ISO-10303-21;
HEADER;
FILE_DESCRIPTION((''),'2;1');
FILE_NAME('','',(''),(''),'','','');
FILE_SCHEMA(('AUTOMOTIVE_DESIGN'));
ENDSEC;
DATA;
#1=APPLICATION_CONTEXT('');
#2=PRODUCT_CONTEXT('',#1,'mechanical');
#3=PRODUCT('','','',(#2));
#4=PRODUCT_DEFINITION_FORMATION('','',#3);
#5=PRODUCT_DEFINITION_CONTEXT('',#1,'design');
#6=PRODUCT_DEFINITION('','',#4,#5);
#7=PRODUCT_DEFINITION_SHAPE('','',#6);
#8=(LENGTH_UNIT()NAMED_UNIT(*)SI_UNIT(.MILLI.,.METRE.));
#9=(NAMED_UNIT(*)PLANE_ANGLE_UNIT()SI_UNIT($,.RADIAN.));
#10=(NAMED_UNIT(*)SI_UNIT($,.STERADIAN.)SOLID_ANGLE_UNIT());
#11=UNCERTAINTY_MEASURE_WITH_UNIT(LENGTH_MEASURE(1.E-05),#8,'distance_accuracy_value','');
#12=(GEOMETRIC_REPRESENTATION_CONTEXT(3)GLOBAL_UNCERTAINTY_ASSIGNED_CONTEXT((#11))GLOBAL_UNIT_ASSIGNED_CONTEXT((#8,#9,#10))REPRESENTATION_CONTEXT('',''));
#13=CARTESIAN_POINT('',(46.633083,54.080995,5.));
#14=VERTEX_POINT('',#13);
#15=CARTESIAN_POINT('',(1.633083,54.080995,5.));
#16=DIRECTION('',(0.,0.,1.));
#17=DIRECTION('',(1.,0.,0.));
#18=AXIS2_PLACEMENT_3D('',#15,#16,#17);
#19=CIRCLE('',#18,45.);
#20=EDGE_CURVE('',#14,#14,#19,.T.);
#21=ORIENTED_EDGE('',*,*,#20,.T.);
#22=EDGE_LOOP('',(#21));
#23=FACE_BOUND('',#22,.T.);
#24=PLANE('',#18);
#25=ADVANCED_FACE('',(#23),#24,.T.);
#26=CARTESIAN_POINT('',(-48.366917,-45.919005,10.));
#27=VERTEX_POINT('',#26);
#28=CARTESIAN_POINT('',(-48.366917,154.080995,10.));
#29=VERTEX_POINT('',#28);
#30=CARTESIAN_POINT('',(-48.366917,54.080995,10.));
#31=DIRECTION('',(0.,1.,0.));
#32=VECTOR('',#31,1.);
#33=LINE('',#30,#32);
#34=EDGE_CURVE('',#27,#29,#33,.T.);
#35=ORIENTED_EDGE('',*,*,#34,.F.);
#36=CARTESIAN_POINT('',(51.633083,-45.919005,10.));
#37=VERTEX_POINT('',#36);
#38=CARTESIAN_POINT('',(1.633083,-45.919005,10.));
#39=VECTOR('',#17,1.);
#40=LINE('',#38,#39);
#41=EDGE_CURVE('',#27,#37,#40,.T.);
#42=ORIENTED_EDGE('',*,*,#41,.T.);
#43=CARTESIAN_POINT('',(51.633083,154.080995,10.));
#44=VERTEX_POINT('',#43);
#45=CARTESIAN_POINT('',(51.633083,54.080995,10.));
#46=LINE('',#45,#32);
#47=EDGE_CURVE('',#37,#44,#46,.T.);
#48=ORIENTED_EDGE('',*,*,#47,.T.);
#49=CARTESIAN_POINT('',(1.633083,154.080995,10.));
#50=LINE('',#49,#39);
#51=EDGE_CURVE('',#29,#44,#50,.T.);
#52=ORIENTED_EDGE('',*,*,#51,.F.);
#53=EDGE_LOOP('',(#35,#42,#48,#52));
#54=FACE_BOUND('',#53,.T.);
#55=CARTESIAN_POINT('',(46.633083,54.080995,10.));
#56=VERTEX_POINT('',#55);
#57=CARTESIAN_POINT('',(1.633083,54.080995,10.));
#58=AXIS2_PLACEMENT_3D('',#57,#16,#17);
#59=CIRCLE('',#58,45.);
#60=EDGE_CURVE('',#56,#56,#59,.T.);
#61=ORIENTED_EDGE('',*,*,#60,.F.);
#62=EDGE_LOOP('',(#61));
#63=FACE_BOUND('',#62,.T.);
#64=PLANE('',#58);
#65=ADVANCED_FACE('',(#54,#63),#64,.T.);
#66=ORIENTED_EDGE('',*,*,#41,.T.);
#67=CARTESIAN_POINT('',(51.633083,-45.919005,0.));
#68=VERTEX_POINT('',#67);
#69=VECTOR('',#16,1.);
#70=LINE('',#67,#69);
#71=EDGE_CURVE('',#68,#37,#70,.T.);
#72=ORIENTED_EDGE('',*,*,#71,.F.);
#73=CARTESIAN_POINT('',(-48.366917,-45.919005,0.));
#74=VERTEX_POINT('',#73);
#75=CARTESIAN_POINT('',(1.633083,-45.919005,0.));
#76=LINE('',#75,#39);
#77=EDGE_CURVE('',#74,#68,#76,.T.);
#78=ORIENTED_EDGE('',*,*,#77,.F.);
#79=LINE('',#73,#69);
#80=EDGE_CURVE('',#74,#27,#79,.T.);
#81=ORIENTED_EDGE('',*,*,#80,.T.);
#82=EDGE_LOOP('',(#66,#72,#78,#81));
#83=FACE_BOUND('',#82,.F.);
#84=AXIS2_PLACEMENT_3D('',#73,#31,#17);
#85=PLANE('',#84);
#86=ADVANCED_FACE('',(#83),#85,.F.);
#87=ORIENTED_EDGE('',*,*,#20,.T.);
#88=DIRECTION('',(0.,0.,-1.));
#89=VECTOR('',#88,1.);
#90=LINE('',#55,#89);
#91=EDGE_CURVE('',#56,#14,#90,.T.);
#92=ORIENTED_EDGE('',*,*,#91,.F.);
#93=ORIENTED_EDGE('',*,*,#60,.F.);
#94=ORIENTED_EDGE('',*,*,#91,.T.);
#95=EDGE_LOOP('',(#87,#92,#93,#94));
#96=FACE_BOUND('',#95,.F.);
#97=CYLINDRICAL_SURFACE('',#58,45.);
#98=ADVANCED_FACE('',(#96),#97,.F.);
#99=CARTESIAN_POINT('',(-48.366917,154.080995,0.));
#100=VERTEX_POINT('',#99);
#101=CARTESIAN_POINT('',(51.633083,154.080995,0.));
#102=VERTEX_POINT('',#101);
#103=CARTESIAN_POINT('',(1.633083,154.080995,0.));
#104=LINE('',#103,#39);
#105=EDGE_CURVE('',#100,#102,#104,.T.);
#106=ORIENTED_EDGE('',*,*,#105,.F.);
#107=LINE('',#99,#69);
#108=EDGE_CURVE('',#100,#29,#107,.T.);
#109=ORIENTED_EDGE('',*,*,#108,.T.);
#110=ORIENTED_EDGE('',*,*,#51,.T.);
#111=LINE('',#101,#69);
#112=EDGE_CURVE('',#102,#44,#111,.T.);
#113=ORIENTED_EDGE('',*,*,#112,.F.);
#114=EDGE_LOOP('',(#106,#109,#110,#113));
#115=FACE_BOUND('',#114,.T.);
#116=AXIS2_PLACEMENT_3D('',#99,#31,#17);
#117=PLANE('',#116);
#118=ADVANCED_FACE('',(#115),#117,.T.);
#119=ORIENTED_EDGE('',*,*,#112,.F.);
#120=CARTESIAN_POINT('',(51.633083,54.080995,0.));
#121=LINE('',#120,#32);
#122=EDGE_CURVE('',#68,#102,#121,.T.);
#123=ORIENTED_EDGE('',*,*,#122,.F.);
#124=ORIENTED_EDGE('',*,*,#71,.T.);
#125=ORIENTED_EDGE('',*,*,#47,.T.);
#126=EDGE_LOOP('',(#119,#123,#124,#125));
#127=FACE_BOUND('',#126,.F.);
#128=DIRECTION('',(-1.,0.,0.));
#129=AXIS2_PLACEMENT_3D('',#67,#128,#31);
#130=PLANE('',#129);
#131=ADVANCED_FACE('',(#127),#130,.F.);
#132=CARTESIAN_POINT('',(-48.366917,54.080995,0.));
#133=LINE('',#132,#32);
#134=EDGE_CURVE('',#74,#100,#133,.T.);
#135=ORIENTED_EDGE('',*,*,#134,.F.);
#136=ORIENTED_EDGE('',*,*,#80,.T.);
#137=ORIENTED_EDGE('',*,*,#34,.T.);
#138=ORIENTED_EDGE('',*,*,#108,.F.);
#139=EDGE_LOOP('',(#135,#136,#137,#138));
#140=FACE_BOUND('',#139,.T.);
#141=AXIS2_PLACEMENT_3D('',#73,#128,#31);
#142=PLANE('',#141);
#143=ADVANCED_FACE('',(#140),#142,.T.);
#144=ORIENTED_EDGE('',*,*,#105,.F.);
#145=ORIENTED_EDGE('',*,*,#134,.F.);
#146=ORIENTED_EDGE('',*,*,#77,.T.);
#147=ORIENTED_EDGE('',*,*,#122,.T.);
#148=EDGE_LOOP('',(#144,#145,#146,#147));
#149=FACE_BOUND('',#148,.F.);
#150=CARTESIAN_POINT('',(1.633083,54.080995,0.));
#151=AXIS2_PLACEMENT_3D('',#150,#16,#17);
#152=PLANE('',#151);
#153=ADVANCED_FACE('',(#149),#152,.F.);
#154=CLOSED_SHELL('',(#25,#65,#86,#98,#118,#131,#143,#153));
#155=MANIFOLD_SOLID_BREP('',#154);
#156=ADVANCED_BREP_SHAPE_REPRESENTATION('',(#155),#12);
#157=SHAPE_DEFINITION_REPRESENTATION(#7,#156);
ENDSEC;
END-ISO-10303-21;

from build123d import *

# Parameters (mm, degrees)
F0_W     = 100
F0_H     = 200
F1_DEPTH = 10
F2_R     = 45
F3_DEPTH = 5


# Not quite as in the source:
# - a feature of the source that left no trace in its solid (it failed there, or was rolled back) is left out


with BuildPart() as f1:
    # F0 (on Top) → F1 (new body)
    with BuildSketch(Plane.XY):
        with Locations((1.6330834478, 54.0809953011)):
            Rectangle(F0_W, F0_H)
    extrude(amount=F1_DEPTH)

    # F2 (on face) → F3 (cut)
    with BuildSketch(Plane.XY.offset(10)):
        with Locations((1.6330834478, 54.0809953011)):
            Circle(F2_R)
    extrude(amount=-F3_DEPTH, mode=Mode.SUBTRACT)


solid = f1.part
